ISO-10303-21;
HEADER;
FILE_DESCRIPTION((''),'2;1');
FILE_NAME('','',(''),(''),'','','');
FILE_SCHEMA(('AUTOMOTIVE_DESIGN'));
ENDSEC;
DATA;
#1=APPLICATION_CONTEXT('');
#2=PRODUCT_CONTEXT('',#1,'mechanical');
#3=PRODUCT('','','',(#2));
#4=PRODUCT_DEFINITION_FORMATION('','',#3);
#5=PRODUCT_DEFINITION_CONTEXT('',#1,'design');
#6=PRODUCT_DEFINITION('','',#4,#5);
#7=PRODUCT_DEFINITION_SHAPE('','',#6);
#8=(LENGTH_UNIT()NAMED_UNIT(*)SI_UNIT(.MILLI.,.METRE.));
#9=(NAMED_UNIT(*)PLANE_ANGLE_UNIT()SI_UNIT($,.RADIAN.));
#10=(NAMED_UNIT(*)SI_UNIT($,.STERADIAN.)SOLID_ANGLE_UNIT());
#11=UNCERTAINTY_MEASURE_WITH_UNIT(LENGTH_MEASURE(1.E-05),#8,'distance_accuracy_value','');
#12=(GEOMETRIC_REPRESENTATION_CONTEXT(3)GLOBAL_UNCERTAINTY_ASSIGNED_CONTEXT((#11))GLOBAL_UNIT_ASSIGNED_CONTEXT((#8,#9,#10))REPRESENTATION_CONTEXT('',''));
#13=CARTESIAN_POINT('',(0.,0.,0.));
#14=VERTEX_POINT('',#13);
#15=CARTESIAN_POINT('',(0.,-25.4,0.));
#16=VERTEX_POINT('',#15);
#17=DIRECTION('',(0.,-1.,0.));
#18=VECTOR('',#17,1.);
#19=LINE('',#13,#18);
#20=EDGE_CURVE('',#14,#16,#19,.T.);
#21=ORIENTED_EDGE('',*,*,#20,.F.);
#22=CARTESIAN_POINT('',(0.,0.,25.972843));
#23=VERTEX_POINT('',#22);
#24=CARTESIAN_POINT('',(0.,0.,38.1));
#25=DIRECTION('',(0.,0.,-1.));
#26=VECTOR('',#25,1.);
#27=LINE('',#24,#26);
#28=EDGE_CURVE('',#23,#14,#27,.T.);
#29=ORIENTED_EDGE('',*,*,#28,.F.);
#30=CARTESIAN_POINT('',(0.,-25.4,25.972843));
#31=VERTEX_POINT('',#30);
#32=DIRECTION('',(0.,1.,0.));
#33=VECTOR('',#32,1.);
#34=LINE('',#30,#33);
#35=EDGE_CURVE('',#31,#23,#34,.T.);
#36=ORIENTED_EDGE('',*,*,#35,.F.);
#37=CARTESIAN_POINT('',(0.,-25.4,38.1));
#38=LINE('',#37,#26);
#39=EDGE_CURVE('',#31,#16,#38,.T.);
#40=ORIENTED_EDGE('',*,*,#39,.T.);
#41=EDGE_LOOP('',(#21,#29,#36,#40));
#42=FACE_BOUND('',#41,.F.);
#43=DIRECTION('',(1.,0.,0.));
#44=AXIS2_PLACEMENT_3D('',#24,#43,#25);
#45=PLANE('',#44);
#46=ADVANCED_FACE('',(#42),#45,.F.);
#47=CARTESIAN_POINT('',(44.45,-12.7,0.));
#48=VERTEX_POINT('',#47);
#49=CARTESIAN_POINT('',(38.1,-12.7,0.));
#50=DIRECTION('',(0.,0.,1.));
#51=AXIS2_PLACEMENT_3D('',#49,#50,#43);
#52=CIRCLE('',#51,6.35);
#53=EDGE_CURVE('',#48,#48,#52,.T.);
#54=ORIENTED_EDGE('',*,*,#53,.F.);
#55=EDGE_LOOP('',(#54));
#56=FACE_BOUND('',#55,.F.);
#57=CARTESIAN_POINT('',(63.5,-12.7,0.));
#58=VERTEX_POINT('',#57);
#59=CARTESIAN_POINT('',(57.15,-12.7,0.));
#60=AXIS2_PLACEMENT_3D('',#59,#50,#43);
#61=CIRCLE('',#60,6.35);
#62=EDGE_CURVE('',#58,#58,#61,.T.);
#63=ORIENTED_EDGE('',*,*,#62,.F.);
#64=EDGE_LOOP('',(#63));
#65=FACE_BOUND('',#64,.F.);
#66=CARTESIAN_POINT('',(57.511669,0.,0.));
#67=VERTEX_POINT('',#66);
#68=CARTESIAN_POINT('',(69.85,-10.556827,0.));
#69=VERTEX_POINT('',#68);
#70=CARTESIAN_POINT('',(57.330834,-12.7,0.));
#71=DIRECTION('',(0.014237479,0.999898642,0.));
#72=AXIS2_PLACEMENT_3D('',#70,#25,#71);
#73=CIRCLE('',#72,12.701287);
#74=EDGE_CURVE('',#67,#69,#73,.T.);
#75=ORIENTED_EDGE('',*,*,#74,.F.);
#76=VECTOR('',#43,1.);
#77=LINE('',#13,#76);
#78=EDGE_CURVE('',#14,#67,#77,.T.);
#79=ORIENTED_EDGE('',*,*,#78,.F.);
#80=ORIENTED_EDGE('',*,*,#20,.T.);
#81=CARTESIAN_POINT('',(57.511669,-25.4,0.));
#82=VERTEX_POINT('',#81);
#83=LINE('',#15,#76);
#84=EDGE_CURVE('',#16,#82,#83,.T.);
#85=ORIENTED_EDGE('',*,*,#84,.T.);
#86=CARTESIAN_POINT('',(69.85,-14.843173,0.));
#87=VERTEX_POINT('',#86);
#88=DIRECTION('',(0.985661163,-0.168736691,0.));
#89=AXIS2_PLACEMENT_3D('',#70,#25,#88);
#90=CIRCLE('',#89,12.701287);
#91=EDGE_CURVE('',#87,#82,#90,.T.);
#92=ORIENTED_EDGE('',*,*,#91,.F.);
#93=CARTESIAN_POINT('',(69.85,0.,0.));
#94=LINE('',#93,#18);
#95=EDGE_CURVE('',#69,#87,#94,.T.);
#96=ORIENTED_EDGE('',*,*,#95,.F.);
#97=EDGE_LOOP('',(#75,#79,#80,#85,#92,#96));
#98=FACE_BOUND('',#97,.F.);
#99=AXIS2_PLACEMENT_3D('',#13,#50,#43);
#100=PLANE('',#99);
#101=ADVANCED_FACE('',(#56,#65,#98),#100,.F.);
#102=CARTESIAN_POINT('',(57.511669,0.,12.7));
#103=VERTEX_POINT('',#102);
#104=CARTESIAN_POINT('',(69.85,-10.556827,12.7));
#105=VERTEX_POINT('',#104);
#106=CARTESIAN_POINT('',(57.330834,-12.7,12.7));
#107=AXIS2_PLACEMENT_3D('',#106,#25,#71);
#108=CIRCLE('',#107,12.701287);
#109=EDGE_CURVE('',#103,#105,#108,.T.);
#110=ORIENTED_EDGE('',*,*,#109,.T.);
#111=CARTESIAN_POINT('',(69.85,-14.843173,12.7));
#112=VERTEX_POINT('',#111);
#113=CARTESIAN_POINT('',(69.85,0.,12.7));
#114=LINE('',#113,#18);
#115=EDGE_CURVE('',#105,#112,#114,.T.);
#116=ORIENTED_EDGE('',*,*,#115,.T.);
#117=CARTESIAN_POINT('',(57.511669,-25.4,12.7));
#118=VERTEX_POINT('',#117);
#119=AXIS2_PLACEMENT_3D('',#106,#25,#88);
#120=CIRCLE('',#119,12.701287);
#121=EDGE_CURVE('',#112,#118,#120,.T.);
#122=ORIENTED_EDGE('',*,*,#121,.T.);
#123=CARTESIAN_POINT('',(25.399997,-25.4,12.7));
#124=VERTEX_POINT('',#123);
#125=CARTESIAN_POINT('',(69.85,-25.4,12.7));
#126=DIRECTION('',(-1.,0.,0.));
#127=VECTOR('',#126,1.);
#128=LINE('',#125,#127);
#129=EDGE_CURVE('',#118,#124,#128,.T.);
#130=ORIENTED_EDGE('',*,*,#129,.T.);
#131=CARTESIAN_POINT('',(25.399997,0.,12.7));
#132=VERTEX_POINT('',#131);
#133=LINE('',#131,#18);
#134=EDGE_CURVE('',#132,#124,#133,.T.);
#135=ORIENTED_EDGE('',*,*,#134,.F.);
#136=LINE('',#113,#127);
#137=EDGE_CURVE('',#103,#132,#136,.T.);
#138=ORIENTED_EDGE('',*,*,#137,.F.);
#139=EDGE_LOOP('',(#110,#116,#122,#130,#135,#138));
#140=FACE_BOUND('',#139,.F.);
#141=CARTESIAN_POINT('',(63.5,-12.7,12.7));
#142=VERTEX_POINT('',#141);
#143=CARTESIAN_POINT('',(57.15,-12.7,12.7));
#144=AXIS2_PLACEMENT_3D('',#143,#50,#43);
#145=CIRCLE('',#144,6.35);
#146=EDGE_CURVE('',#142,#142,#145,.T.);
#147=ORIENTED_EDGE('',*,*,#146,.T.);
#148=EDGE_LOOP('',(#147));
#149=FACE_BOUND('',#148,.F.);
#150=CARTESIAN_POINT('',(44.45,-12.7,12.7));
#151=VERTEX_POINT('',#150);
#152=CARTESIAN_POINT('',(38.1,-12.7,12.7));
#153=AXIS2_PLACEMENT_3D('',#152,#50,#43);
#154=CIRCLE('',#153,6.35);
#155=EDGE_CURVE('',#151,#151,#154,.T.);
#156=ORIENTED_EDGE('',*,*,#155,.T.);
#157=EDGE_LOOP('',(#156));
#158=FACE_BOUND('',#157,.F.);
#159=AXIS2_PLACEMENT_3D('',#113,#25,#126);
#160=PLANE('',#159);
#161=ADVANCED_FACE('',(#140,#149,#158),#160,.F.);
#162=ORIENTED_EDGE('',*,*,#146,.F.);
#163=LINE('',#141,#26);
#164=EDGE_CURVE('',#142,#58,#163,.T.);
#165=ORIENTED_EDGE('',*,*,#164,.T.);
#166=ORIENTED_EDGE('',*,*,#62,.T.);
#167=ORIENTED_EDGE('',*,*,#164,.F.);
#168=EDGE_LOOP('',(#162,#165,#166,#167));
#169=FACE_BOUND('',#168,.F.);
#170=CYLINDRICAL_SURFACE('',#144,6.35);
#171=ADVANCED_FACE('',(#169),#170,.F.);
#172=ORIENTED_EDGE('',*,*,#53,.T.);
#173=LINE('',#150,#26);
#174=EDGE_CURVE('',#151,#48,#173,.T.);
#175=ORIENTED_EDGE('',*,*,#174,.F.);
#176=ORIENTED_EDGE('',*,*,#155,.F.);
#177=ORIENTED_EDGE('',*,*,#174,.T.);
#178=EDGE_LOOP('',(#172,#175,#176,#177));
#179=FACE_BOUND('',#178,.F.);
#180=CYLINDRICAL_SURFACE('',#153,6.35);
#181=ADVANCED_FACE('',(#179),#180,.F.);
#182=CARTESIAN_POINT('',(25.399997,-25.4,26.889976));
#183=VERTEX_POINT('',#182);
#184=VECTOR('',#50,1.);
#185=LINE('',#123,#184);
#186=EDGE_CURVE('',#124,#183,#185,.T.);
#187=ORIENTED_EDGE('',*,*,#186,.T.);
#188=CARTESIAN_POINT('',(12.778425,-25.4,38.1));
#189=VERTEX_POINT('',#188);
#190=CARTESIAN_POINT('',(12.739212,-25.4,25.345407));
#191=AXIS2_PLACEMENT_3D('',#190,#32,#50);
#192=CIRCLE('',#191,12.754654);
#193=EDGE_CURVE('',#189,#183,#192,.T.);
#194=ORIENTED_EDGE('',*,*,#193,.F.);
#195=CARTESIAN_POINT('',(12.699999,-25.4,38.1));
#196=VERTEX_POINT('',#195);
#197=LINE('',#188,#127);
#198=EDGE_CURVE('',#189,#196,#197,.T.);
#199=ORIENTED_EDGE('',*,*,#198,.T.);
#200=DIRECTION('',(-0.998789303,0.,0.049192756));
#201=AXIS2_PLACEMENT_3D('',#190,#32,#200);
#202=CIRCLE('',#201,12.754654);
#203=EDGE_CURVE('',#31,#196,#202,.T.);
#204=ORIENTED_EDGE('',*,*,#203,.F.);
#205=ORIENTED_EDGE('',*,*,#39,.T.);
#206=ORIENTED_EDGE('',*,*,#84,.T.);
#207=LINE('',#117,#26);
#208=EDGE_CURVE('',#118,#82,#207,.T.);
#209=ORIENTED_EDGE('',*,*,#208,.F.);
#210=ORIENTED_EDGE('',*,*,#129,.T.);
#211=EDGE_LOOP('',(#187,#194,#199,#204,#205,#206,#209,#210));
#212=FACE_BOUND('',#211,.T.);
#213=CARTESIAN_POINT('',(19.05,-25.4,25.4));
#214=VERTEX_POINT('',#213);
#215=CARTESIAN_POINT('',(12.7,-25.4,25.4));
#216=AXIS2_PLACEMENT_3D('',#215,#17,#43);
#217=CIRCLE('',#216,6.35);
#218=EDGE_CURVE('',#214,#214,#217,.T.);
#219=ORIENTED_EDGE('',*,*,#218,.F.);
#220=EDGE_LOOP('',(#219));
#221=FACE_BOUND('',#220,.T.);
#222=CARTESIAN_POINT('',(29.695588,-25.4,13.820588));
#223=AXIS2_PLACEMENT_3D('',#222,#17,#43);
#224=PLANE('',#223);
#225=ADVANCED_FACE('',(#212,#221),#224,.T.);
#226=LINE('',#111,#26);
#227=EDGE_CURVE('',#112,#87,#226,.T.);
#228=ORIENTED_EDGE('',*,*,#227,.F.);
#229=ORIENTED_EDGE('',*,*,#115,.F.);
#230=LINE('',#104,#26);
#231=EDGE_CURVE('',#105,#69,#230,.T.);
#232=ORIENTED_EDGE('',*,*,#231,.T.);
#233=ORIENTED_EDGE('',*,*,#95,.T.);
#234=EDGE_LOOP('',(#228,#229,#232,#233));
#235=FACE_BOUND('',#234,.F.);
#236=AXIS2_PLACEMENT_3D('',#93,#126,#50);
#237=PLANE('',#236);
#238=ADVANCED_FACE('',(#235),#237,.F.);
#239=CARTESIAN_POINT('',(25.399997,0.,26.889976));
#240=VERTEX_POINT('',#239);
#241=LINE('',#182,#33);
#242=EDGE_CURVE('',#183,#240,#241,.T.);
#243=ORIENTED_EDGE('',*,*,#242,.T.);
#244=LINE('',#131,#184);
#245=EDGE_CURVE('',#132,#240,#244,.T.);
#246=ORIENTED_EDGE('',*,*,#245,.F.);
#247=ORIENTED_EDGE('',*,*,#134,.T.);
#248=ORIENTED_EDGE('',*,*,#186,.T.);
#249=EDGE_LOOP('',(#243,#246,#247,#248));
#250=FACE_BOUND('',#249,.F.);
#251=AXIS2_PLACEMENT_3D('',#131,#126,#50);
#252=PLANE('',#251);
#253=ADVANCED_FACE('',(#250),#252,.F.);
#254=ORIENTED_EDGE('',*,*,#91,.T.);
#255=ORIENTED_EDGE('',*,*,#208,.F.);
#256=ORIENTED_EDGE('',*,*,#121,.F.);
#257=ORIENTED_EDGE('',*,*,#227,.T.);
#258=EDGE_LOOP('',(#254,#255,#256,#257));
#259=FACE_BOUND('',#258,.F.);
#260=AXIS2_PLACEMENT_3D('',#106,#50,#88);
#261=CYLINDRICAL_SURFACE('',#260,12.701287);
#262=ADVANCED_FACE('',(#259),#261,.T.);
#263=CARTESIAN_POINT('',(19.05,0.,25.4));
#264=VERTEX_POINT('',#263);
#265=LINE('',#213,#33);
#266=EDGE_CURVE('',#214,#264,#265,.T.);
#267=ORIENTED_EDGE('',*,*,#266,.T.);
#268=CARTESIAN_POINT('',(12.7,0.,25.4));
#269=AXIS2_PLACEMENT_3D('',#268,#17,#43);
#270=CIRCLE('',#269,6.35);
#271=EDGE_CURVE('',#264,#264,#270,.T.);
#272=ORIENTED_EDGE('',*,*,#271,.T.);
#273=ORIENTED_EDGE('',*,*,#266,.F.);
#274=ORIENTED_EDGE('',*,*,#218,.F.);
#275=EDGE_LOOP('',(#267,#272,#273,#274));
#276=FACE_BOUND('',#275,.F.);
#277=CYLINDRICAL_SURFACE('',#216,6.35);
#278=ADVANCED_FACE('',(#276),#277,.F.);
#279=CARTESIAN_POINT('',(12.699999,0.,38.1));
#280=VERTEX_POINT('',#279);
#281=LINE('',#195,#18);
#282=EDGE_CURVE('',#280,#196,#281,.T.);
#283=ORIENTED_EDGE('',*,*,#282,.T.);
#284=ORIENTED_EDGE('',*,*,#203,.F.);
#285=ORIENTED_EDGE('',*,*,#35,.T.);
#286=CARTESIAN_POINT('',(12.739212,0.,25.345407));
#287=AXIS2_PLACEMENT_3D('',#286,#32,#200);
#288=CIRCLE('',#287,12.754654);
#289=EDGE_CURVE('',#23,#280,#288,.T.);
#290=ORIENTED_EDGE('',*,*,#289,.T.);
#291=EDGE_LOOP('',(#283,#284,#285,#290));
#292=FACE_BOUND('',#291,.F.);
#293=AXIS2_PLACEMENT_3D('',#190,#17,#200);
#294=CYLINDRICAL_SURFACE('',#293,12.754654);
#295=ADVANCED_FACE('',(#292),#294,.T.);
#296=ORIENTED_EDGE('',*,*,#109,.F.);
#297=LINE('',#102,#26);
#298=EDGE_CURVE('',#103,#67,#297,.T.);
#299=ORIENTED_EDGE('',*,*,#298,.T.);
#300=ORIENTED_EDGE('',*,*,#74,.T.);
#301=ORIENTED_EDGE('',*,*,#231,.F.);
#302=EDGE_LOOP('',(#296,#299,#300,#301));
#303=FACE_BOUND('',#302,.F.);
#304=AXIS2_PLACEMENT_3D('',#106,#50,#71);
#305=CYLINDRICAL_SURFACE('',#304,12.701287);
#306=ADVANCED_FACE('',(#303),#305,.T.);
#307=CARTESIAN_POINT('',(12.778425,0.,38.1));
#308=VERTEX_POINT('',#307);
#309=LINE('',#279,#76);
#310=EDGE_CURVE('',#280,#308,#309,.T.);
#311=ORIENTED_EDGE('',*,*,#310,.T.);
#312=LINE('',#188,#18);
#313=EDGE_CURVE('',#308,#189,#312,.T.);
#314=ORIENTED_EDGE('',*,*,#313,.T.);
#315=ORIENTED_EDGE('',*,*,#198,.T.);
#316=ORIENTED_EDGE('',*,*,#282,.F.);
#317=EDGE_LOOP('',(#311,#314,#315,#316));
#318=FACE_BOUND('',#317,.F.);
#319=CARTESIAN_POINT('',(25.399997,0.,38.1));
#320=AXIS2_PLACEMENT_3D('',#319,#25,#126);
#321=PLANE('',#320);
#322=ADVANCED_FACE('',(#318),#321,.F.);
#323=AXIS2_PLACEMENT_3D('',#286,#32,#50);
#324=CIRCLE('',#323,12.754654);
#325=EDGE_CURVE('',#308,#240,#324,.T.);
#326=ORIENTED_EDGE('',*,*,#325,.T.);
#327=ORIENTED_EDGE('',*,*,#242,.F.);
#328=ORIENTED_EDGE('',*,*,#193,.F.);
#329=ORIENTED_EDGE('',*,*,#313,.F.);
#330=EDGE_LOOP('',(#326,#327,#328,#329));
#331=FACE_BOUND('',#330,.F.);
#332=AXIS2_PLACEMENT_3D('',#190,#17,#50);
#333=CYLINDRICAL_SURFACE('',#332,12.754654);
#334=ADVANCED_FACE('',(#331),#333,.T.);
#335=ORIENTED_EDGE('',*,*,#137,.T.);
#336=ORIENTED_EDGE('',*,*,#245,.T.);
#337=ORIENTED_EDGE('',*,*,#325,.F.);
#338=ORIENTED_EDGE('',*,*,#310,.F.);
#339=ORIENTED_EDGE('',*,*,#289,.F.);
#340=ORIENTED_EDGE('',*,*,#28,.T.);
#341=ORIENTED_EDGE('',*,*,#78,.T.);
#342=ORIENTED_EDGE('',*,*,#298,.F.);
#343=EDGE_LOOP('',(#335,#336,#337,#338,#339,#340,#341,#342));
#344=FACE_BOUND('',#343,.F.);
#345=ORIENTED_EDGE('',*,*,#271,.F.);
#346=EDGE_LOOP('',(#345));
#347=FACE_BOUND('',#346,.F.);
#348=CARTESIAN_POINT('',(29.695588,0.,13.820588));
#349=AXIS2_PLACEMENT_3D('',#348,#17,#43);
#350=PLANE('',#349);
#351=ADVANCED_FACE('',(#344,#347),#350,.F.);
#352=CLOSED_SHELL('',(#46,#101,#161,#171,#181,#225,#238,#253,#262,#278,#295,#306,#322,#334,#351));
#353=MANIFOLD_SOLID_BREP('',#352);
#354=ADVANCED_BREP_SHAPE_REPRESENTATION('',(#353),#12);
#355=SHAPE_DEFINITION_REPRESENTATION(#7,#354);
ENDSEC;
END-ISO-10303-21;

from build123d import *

# Parameters (mm, degrees)
F1_DEPTH = 25.4
F2_R     = 6.35
F3_DEPTH = 25.4
F4_R     = 6.35
F5_DEPTH = 12.7


# Not quite as in the source:
# - ends of sketch curves that miss each other by under 0.0002 mm in the source are joined


with BuildPart() as f1:
    # F0 (on Front) → F1 (new body)
    with BuildSketch(Plane.XZ):
        Polygon((0, 38.1), (0, 0), (69.85, 0), (69.85, 12.7), (25.3999973736, 12.7), (25.3999973736, 38.1), align=None)
    extrude(amount=F1_DEPTH)

    # F2 (on face) → F3 (cut)
    with BuildSketch(Plane.XZ.offset(25.4)):
        with Locations((12.7, 25.4)):
            Circle(F2_R)
        with BuildLine():
            ThreePointArc((12.7392116615, 38.1000602784), (21.1944094362, 34.8947951162), (25.3999973736, 26.8899763006))
            Line((25.3999973736, 26.8899763006), (25.3999973736, 38.1))
            Line((25.3999973736, 38.1), (12.7392116615, 38.1000602784))
        make_face()
        with BuildLine():
            ThreePointArc((0, 25.9728431702), (3.9449392563, 34.5834780061), (12.7392116615, 38.1000602784))
            Line((12.7392116615, 38.1000602784), (0, 38.1))
            Line((0, 38.1), (0, 25.9728431702))
        make_face()
    extrude(amount=-F3_DEPTH, mode=Mode.SUBTRACT)

    # F4 (on face) → F5 (cut)
    with BuildSketch(Plane.XY.offset(12.7)):
        with Locations((38.1, -12.7)):
            Circle(F4_R)
        with Locations((57.15, -12.7)):
            Circle(F4_R)
        with BuildLine():
            ThreePointArc((57.5116686145, 0), (65.5882036204, -3.0491682704), (69.85, -10.5568267911))
            Line((69.85, -10.5568267911), (69.85, 0))
            Line((69.85, 0), (57.5116686145, 0))
        make_face()
        with BuildLine():
            ThreePointArc((69.85, -14.8431732089), (65.5882036204, -22.3508317296), (57.5116686145, -25.4))
            Line((57.5116686145, -25.4), (69.85, -25.4))
            Line((69.85, -25.4), (69.85, -14.8431732089))
        make_face()
    extrude(amount=-F5_DEPTH, mode=Mode.SUBTRACT)


solid = f1.part
